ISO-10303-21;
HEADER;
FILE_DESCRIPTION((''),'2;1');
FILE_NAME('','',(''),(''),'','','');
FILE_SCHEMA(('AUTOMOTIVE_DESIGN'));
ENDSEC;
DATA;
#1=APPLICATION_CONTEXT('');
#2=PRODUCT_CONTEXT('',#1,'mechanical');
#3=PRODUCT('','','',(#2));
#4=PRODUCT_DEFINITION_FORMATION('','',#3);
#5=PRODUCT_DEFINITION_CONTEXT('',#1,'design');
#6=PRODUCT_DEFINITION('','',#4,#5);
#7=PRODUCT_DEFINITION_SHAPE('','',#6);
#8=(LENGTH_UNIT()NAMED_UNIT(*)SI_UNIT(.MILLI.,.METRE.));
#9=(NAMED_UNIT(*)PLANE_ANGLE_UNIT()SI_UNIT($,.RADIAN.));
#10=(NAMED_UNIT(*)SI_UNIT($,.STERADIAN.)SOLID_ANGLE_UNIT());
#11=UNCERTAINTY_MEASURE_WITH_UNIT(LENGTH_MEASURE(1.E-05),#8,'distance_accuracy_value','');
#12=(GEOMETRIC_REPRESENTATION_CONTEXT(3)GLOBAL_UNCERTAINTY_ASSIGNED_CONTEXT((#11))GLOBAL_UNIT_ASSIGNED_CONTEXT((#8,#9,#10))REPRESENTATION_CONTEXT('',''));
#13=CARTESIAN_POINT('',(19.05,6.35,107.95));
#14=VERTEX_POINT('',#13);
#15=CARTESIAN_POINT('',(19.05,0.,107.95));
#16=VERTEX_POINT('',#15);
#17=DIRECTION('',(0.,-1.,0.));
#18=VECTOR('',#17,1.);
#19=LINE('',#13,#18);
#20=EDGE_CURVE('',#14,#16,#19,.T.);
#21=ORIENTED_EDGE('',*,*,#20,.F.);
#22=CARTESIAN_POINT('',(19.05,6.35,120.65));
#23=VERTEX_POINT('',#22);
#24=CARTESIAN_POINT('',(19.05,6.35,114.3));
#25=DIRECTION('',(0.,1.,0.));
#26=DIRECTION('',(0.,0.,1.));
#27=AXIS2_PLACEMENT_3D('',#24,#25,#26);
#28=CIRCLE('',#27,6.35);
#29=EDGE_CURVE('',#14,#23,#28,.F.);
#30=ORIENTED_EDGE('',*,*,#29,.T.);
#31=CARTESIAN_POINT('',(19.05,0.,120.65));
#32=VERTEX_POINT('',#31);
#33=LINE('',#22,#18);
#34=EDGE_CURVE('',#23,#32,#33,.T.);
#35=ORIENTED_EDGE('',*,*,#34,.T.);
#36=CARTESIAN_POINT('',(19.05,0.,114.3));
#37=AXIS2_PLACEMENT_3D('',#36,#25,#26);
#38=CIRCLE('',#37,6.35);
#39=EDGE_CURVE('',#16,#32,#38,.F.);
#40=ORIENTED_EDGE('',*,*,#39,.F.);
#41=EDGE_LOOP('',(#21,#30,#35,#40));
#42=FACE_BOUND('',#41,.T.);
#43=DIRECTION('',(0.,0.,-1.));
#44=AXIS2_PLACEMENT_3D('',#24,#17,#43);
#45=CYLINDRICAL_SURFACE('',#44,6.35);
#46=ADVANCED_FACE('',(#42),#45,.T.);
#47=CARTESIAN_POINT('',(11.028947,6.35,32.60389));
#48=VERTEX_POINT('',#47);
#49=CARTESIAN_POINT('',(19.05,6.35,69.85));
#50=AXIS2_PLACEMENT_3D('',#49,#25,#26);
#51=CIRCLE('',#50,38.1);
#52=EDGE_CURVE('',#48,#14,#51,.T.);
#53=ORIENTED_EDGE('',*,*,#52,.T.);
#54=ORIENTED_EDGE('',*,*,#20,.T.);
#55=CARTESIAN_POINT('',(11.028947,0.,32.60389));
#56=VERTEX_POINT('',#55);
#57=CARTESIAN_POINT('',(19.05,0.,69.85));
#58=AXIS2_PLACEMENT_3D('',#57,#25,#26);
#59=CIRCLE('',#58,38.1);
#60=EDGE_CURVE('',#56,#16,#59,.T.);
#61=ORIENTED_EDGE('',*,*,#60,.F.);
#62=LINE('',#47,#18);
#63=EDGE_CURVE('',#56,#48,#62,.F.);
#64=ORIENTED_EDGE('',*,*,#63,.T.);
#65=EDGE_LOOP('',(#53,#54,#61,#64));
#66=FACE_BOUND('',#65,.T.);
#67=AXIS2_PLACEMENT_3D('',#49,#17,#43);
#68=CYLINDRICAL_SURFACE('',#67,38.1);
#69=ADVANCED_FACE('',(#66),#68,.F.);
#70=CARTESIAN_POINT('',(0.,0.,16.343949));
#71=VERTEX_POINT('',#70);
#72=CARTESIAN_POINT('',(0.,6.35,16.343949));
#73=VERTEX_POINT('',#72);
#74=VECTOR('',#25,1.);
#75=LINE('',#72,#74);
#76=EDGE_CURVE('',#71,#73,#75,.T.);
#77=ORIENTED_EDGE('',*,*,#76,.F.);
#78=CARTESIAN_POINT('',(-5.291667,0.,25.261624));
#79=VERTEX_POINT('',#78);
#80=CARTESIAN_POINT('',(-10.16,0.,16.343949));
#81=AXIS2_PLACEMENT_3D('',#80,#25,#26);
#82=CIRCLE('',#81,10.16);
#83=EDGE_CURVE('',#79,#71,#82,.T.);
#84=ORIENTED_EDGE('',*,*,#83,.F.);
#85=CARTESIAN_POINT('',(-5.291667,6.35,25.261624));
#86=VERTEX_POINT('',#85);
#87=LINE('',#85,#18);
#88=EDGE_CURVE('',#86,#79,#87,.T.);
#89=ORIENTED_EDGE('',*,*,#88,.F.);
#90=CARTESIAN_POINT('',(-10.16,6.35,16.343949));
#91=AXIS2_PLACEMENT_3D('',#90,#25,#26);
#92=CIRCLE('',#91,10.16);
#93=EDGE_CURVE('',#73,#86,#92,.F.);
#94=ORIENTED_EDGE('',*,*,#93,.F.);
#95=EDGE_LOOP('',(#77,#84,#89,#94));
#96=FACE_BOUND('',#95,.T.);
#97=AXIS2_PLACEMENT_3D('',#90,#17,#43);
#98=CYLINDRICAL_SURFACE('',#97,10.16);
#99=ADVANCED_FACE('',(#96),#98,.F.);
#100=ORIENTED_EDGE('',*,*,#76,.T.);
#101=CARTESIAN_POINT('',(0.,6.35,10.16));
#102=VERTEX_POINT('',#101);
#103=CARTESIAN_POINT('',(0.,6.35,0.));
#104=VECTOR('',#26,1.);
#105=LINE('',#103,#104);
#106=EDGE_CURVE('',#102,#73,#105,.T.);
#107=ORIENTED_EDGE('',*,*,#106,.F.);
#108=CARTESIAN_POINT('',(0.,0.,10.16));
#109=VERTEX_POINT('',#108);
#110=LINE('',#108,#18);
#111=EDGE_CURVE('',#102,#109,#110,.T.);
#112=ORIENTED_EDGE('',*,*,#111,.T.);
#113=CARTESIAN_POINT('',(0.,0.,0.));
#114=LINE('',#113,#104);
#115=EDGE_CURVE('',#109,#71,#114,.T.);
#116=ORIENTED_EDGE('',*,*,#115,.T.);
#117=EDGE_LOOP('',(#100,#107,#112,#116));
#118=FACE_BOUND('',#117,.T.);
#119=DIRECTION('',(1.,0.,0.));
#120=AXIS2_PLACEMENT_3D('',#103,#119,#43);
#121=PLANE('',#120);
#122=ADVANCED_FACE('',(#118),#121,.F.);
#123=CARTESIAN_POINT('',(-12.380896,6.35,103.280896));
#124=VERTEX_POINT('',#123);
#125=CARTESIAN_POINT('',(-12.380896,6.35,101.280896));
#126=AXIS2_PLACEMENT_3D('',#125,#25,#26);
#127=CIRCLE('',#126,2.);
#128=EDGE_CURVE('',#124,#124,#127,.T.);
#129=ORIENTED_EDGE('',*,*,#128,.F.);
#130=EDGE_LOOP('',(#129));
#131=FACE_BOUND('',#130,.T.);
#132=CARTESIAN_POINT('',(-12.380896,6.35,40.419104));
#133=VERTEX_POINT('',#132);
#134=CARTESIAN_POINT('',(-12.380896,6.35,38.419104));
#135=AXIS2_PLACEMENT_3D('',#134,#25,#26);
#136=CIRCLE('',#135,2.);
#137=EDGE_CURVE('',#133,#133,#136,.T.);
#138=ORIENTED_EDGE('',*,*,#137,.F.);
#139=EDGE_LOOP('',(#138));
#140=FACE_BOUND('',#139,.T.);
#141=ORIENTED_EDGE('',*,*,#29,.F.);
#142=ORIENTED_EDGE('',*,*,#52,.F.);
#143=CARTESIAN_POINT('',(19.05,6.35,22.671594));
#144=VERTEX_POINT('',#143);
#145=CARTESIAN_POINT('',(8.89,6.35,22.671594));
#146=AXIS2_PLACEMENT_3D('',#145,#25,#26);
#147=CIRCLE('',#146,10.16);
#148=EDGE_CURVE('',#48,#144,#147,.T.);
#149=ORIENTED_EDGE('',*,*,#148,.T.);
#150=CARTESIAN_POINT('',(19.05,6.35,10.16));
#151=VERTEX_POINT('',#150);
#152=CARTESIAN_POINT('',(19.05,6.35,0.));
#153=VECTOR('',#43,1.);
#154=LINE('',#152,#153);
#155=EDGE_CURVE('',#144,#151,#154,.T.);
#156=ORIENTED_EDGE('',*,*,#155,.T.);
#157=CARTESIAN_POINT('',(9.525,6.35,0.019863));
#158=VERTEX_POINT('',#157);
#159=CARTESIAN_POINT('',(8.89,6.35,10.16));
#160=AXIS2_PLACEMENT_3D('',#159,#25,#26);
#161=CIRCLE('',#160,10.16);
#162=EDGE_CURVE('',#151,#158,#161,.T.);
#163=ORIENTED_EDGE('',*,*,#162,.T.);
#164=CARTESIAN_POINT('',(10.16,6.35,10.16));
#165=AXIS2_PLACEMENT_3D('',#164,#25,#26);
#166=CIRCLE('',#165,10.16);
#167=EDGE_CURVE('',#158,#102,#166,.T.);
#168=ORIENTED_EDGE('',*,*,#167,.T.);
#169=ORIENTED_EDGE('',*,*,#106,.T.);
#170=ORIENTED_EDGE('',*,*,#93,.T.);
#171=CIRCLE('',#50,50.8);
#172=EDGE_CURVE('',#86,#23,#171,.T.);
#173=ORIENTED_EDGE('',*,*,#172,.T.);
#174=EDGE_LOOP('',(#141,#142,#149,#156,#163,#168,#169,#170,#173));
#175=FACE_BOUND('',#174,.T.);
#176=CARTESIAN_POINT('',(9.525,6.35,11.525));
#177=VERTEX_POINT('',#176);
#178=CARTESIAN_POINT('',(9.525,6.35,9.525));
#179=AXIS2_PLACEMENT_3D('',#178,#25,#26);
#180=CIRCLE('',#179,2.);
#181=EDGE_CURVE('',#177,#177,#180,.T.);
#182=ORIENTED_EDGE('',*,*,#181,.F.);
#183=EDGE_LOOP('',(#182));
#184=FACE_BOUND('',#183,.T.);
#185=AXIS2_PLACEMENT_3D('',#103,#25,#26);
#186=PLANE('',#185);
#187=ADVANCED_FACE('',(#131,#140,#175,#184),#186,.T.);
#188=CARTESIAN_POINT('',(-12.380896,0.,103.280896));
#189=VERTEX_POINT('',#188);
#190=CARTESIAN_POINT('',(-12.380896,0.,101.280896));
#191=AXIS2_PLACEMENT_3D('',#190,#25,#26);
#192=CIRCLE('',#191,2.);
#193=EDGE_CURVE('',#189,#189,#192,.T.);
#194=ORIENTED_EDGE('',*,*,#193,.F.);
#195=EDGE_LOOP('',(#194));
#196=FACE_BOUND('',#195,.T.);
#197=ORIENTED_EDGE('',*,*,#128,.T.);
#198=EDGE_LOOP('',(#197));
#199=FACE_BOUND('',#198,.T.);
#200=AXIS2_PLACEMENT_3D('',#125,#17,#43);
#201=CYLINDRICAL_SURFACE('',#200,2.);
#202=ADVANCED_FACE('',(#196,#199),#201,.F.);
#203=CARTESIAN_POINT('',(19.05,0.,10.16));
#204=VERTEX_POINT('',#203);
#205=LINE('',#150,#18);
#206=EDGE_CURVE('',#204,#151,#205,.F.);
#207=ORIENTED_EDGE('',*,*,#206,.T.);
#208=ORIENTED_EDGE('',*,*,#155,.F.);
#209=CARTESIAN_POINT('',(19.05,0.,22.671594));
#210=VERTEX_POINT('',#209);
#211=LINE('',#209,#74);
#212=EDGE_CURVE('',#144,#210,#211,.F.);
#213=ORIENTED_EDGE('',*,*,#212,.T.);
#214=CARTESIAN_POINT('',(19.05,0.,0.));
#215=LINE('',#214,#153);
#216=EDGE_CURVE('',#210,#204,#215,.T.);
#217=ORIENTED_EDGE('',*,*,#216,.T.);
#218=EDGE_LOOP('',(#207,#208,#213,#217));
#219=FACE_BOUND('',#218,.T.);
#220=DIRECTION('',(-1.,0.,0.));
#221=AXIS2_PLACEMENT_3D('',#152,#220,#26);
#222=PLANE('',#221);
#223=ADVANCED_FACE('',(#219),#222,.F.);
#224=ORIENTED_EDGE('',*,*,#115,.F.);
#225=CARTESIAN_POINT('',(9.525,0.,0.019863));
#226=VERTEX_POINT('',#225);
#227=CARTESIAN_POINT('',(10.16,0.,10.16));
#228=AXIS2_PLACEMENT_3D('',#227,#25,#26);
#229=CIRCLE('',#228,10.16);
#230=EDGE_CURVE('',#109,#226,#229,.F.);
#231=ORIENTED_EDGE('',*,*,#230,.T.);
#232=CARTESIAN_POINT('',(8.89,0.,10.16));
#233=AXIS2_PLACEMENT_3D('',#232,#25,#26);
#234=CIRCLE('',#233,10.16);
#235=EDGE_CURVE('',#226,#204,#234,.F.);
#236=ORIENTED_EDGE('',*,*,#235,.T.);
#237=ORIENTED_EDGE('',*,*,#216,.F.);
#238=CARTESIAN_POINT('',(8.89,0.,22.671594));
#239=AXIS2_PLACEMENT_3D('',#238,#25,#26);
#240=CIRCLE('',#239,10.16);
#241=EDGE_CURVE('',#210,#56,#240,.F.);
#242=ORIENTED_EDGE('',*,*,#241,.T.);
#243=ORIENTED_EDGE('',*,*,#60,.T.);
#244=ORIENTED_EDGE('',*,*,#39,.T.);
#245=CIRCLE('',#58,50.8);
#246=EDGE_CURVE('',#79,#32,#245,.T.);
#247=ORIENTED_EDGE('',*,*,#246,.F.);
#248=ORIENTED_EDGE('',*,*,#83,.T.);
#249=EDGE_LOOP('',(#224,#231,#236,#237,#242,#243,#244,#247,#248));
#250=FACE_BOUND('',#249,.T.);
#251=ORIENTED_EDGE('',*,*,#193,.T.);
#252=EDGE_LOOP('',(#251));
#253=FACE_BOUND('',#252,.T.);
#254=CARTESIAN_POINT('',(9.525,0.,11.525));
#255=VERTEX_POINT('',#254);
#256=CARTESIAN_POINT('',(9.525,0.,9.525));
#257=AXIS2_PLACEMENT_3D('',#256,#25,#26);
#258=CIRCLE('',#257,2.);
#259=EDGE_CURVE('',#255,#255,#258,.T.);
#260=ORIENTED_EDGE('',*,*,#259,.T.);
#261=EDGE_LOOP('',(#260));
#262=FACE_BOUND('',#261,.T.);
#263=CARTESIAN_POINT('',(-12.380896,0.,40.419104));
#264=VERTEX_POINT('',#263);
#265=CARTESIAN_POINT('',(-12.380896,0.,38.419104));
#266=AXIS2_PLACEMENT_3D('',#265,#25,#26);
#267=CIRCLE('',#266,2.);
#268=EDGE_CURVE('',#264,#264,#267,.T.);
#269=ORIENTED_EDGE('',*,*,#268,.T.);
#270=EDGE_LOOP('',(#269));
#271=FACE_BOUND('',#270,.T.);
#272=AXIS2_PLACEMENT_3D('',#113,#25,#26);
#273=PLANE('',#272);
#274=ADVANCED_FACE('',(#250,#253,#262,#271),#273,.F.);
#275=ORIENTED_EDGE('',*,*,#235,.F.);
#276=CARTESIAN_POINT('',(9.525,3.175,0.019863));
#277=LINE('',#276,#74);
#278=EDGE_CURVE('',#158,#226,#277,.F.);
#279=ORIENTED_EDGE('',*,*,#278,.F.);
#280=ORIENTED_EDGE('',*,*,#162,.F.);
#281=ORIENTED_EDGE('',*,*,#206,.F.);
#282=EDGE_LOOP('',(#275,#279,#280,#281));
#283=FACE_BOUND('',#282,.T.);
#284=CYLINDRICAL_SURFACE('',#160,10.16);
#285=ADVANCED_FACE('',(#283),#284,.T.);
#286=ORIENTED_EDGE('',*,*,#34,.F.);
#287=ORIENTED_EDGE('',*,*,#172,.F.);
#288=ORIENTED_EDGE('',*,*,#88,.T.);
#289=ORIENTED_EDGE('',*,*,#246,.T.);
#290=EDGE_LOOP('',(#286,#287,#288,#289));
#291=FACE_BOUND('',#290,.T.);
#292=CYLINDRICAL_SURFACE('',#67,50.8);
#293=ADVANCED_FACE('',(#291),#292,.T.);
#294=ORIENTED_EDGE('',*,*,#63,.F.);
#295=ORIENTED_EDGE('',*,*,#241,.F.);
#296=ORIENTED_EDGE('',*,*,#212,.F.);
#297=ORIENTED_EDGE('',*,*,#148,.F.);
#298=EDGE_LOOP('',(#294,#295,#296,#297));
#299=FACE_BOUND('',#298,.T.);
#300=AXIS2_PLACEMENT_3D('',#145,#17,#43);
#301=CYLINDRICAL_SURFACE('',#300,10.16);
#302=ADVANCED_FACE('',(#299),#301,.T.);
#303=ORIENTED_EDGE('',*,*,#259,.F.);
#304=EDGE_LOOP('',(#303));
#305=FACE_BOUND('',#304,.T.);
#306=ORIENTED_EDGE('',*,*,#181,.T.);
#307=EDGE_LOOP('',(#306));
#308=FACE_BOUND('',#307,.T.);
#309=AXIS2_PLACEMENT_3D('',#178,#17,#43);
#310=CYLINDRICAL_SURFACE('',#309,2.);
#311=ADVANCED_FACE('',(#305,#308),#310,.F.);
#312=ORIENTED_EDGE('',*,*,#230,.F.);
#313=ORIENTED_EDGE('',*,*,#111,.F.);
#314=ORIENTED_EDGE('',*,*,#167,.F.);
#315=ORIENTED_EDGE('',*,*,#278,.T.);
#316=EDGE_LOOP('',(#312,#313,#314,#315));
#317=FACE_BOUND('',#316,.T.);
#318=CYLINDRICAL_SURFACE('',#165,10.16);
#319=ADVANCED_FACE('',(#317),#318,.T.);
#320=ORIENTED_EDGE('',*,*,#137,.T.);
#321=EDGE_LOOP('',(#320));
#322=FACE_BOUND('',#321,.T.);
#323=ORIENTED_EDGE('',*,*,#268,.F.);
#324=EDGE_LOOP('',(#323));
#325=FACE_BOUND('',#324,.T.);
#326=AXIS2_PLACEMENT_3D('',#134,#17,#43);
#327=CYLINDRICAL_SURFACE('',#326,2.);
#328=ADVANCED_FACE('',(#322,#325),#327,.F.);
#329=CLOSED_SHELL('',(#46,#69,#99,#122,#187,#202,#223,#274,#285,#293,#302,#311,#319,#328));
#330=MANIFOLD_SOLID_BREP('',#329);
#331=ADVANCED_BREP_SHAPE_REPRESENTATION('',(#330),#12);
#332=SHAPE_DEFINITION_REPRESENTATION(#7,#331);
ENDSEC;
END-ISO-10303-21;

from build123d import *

# Parameters (mm, degrees)
SKETCH1_R           = 2
BOSS_EXTRUDE1_DEPTH = 6.35
FILLET1_R           = 10.16


with BuildPart() as part:
    # Sketch1 → Boss-Extrude1 (new body)
    with BuildSketch(Plane(origin=(0, 0, 0), x_dir=(1, 0, 0), z_dir=(0, 1, 0))):
        with BuildLine():
            Line((19.05, 0), (0, 0))
            Line((0, 0), (0, -22.757139607))
            ThreePointArc((0, -22.757139607), (-30.814603217, -79.553676933), (19.05, -120.65))
            ThreePointArc((19.05, -120.65), (25.4, -114.3), (19.05, -107.95))
            ThreePointArc((19.05, -107.95), (-19.05, -69.85), (19.05, -31.75))
            Line((19.05, -31.75), (19.05, 0))
        make_face()
        with Locations(Location((9.525, -9.525, 0), (0, 0, 270))):
            Circle(SKETCH1_R, mode=Mode.SUBTRACT)
        with Locations(Location((-12.380896424, -38.419103576, 0), (0, 0, 270))):
            Circle(SKETCH1_R, mode=Mode.SUBTRACT)
        with Locations(Location((-12.380896424, -101.280896424, 0), (0, 0, 270))):
            Circle(SKETCH1_R, mode=Mode.SUBTRACT)
    extrude(amount=BOSS_EXTRUDE1_DEPTH)

    # Fillet1
    # the kernel refuses this fillet: 10.16 mm, written as the material it adds along each edge
    with BuildSketch(Plane(origin=(0, 0, 22.757139607), x_dir=(0, 0, -1), z_dir=(0, 1, 0))) as fillet1_piece_1:
        with BuildLine():
            CenterArc((6.413190667, 10.16), FILLET1_R, 208.630989837, 61.369010163)
            ThreePointArc((-2.50448451, 5.291666667), (-1.175949507, 2.681941807), (0, 0))
            Line((0, 0), (6.413190667, 0))
        make_face()
    extrude(amount=6.35)
    # the kernel refuses this fillet: 10.16 mm, written as the material it takes off along each edge
    with BuildSketch(Plane(origin=(19.05, -22.696015193, 31.75), x_dir=(0, 0, -1), z_dir=(0, 1, 0))) as fillet1_2_piece_1:
        with BuildLine():
            CenterArc((9.078406077, 10.16), FILLET1_R, 192.153197469, 77.846802531)
            ThreePointArc((-0.853889939, 8.021052632), (-0.214073897, 4.033187739), (0, 0))
            Line((0, 0), (9.078406077, 0))
        make_face()
    extrude(amount=51.742030387, mode=Mode.SUBTRACT)
    with BuildSketch(Plane(origin=(0, -25.4, 0), x_dir=(1, 0, 0), z_dir=(0, 1, 0)), Plane(origin=(19.05, -25.4, 0), x_dir=(0, 0, 1), z_dir=(0, 1, 0))) as fillet1_2_piece_2:
        with BuildLine():
            CenterArc((FILLET1_R, -FILLET1_R), FILLET1_R, 90, 90)
            Line((0, -FILLET1_R), (0, 0))
            Line((0, 0), (FILLET1_R, 0))
        make_face()
    extrude(amount=57.15, mode=Mode.SUBTRACT)


solid = part.part
